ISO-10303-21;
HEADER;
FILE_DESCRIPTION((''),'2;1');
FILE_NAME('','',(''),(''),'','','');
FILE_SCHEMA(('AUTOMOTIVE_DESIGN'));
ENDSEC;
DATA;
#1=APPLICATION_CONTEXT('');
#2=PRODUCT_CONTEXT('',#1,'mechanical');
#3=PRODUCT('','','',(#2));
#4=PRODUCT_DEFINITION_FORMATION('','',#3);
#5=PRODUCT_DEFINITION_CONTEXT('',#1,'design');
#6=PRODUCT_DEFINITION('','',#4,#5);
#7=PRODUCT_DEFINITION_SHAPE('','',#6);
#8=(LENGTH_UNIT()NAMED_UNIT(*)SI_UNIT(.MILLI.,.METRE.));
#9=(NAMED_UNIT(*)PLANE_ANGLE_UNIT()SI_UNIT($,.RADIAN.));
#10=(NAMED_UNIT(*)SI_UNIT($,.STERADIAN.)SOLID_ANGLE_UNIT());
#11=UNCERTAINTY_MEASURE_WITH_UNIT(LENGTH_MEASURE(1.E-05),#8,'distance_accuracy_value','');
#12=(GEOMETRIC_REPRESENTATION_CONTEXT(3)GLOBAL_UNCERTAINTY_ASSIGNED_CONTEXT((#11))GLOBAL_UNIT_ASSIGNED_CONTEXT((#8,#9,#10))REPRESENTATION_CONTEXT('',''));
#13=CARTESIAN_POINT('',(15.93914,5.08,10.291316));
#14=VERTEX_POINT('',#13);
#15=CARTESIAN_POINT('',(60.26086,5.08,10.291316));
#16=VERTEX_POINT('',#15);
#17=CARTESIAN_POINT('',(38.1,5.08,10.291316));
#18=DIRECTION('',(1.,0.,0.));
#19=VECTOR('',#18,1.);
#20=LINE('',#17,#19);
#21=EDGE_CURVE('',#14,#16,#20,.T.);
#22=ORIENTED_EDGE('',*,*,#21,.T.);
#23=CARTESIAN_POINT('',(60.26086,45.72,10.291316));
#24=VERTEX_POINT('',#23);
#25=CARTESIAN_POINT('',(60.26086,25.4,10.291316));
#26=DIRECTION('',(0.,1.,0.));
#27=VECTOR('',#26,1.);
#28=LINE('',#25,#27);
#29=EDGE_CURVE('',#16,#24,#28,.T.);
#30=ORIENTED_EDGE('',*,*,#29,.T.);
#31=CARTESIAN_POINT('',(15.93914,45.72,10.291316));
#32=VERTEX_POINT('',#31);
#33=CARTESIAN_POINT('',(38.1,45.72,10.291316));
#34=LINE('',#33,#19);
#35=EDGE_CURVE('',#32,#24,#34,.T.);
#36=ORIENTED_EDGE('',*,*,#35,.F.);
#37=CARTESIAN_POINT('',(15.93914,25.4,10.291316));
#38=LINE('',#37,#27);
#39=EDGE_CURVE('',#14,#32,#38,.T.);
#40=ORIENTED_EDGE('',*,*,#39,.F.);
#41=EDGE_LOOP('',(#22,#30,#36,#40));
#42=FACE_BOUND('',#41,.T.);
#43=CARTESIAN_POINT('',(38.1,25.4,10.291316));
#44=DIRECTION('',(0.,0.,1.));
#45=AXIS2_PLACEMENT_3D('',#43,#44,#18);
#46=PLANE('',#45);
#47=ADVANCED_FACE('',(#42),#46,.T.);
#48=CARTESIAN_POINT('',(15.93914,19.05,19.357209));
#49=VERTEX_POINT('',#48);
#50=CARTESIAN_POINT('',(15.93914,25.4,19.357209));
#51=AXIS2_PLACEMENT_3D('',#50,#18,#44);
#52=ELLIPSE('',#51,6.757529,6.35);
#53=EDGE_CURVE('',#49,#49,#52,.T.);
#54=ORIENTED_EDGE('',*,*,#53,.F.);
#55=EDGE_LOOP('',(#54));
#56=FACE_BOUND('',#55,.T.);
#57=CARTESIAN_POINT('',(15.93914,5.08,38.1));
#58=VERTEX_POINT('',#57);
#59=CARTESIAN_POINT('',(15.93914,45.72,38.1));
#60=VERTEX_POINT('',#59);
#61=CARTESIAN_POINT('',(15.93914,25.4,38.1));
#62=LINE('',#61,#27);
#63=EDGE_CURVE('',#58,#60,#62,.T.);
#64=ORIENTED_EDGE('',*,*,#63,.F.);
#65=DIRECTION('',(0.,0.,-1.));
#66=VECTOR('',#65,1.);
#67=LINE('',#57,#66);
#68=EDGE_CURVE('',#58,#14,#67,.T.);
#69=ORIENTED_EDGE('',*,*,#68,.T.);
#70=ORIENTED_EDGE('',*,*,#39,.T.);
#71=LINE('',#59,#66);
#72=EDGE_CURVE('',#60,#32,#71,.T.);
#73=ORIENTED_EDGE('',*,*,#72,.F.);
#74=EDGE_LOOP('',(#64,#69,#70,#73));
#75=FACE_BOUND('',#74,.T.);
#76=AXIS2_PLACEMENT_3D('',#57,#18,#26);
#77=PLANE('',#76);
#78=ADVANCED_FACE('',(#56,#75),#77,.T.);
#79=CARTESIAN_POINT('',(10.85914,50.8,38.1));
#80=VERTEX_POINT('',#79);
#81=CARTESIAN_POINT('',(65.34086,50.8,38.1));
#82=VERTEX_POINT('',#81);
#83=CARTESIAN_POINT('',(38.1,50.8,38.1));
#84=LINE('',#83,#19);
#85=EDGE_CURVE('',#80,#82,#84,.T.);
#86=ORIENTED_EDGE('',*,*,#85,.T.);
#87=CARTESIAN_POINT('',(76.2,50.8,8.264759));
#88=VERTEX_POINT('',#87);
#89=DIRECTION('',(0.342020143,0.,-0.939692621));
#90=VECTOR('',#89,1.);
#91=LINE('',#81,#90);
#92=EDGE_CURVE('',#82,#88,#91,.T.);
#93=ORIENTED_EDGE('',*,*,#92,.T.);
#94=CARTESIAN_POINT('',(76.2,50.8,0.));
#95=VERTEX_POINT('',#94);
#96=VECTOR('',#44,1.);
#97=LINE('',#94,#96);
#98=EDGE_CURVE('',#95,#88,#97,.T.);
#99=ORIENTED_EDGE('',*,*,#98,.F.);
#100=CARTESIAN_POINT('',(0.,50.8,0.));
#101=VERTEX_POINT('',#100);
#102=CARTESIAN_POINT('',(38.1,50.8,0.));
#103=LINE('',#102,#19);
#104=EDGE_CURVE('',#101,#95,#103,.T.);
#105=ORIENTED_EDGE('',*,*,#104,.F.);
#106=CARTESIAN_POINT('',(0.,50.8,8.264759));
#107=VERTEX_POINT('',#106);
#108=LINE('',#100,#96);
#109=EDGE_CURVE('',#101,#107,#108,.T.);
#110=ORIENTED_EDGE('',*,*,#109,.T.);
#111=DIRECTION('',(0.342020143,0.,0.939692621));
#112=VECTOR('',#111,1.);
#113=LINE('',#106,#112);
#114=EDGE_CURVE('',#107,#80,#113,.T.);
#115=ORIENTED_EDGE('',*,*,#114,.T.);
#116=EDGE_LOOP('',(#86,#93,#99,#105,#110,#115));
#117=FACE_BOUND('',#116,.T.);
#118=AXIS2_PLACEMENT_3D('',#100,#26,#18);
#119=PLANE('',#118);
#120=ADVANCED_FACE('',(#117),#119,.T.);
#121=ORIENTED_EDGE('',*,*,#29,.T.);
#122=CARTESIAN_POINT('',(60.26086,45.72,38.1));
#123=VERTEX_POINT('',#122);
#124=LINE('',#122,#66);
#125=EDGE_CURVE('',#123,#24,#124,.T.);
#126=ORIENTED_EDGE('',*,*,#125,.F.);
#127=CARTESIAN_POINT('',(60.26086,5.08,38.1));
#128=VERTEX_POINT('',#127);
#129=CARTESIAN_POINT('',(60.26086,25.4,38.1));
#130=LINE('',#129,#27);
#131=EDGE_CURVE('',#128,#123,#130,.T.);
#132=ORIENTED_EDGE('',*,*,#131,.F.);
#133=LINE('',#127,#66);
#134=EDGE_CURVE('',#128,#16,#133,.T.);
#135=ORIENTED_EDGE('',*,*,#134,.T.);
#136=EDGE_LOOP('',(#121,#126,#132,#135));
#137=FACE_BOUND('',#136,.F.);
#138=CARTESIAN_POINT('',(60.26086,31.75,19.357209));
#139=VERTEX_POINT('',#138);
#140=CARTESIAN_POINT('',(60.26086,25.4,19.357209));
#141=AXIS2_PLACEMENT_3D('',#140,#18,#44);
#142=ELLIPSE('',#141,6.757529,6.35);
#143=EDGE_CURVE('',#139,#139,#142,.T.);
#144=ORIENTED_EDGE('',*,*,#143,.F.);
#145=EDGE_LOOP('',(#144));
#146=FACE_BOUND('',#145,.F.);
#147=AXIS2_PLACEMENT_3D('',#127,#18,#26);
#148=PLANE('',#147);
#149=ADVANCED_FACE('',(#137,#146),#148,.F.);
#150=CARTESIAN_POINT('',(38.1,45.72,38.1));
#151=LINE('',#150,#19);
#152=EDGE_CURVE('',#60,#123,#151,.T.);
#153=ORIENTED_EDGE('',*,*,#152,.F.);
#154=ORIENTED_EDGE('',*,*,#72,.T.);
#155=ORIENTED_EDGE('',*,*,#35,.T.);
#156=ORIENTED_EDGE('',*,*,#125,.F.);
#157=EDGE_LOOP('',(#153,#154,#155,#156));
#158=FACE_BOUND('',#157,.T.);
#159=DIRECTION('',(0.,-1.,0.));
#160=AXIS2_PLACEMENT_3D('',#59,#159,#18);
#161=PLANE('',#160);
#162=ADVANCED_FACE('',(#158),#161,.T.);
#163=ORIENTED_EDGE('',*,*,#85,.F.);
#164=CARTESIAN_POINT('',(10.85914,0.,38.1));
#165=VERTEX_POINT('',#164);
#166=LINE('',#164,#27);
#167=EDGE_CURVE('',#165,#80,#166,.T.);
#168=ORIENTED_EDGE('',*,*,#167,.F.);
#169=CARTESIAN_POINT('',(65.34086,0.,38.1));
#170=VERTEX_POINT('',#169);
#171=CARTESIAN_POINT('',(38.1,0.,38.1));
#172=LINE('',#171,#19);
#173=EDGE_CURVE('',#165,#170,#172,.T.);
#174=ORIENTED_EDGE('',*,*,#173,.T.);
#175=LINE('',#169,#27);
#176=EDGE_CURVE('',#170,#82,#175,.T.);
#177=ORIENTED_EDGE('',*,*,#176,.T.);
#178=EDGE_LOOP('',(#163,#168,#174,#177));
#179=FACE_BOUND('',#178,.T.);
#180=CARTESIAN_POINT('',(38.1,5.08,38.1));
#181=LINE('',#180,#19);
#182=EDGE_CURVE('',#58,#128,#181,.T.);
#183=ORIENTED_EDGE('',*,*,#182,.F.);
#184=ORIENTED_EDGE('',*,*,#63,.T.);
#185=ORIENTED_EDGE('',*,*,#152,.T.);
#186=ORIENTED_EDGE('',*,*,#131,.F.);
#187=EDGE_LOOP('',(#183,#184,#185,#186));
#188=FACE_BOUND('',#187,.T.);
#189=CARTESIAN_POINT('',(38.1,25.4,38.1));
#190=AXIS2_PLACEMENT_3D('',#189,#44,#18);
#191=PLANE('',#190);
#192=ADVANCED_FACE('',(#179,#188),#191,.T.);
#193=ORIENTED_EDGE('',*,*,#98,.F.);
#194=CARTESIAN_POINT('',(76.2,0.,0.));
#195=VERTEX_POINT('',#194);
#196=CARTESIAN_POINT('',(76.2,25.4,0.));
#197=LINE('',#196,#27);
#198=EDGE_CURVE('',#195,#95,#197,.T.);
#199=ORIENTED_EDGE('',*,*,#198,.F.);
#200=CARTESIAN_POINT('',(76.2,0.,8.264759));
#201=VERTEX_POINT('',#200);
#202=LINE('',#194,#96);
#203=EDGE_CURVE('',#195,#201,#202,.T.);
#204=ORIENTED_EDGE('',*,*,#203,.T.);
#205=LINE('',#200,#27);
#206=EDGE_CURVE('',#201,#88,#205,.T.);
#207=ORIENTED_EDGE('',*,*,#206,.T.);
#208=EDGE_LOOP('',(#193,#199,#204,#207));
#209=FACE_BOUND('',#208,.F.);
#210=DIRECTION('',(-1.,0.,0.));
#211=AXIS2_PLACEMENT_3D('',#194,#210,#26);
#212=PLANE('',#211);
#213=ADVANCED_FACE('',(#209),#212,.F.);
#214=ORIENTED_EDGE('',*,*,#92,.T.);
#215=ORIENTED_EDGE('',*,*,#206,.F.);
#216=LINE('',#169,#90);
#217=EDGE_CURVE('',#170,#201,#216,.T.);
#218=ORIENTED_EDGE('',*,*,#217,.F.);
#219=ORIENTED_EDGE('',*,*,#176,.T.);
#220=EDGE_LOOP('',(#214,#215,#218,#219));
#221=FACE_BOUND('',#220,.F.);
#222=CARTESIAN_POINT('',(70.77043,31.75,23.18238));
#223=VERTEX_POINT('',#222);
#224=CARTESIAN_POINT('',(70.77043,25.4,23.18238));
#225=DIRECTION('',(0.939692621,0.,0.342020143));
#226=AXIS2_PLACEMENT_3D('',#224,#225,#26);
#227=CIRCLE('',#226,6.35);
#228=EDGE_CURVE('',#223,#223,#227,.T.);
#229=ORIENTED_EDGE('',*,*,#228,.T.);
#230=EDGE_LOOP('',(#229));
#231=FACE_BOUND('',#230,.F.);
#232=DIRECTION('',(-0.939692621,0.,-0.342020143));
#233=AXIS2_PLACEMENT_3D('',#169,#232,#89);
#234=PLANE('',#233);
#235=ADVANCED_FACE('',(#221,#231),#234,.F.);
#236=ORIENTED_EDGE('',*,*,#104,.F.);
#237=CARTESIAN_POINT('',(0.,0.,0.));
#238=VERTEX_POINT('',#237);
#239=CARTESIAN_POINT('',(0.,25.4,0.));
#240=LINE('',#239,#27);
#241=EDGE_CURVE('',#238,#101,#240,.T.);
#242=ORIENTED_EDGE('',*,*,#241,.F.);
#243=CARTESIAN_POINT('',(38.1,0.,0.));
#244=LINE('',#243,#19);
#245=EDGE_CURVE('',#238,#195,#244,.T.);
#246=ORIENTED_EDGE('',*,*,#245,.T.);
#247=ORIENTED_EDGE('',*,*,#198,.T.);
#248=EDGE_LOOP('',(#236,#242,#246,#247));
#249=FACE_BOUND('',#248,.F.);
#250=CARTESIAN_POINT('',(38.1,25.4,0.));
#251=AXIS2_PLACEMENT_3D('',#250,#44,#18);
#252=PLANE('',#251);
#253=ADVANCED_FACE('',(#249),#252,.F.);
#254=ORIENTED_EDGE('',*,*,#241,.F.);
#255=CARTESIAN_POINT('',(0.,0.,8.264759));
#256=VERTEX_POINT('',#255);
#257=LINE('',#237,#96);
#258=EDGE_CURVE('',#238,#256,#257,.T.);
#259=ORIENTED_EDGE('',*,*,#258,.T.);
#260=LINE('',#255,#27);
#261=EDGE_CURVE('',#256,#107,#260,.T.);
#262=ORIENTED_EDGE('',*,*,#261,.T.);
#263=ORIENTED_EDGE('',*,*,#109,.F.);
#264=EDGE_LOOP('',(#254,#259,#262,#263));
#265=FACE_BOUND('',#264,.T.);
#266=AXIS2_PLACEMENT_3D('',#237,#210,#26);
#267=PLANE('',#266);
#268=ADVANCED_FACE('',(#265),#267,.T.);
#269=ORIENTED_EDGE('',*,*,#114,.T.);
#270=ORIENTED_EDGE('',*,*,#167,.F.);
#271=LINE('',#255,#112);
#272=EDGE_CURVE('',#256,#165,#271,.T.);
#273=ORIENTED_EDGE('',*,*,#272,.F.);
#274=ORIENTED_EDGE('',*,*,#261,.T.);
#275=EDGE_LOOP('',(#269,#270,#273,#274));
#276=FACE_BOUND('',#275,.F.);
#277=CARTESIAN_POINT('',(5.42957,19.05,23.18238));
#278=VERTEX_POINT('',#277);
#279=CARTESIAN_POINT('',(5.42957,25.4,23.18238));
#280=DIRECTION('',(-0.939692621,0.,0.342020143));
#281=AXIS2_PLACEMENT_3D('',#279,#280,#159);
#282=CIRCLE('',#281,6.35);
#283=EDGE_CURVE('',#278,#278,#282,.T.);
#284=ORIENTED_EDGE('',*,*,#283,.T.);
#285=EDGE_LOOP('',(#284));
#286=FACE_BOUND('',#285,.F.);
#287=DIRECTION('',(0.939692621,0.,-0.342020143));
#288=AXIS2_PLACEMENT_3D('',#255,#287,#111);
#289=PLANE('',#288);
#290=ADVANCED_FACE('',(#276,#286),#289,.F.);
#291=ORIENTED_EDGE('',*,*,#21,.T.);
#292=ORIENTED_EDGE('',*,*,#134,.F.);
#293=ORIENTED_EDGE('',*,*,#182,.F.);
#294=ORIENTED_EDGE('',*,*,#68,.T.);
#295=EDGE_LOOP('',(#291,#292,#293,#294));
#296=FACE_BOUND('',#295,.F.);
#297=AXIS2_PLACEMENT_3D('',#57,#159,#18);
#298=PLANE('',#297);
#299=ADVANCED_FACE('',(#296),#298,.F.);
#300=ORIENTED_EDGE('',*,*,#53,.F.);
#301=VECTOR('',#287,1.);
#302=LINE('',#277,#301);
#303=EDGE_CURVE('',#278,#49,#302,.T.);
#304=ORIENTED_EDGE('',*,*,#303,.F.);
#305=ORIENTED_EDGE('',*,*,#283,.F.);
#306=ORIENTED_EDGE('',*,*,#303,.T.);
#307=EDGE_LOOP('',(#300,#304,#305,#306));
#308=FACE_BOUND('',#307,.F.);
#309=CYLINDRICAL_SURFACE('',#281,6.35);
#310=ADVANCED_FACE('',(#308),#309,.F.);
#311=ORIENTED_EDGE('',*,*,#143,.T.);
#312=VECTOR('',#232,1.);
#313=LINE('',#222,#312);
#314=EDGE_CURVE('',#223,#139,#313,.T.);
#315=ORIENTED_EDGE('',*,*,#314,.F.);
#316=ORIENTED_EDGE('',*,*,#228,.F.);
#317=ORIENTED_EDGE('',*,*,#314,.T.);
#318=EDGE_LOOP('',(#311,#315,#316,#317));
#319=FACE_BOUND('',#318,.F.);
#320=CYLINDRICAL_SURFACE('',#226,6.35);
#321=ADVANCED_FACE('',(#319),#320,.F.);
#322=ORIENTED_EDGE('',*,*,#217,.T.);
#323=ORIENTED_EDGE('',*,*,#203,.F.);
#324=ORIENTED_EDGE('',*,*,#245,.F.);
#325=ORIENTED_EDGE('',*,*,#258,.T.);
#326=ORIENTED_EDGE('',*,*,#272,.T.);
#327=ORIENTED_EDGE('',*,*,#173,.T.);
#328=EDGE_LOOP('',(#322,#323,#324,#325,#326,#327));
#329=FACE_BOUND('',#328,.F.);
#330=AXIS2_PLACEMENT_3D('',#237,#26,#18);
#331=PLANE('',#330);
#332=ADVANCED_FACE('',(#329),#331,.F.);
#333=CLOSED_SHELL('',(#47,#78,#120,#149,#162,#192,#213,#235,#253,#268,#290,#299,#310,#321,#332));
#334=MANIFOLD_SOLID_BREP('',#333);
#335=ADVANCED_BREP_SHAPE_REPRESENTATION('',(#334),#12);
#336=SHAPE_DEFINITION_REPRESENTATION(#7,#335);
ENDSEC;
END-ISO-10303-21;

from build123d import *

# Parameters (mm, degrees)
F0_W     = 76.2
F0_H     = 50.8
F1_DEPTH = 38.1
F3_DEPTH = 50.8
F4_W     = 44.3217208988
F4_H     = 40.64
F5_DEPTH = 27.8086844974
F6_R     = 6.35
F7_DEPTH = 13.4962615407
F8_R     = 6.35
F9_DEPTH = 13.4962615407


with BuildPart() as f1:
    # F0 (on Top) → F1 (new body)
    with BuildSketch(Plane.XY):
        with Locations((38.1, 25.4)):
            Rectangle(F0_W, F0_H)
    extrude(amount=F1_DEPTH)

    # F2 (on face) → F3 (cut, through all)
    with BuildSketch(Plane.XZ):
        Polygon((0, 38.1), (0, 8.26475929), (10.8591395506, 38.1), align=None)
        Polygon((76.2, 38.1), (65.3408604494, 38.1), (76.2, 8.26475929), align=None)
    extrude(amount=-F3_DEPTH, mode=Mode.SUBTRACT)

    # F4 (on face) → F5 (cut, through all)
    with BuildSketch(Plane.XY.offset(38.1)):
        with Locations((38.1, 25.4)):
            Rectangle(F4_W, F4_H)
    extrude(amount=-F5_DEPTH, mode=Mode.SUBTRACT)

    # F6 (on face) → F7 (cut, through all)
    with BuildSketch(Plane(origin=(-2.6562424343, 0, 0.9667931811), x_dir=(0, -1, 0), z_dir=(-0.9396926208, 0, 0.3420201433))):
        with Locations((-25.4, 23.6413333174)):
            Circle(F6_R)
    extrude(amount=-F7_DEPTH, mode=Mode.SUBTRACT)

    # F8 (on face) → F9 (cut, through all)
    with BuildSketch(Plane(origin=(69.9425357172, 0, 25.4570011102), x_dir=(0, 1, 0), z_dir=(0.9396926208, 0, 0.3420201433))):
        with Locations((25.4, -2.420601604)):
            Circle(F8_R)
    extrude(amount=-F9_DEPTH, mode=Mode.SUBTRACT)


solid = f1.part
